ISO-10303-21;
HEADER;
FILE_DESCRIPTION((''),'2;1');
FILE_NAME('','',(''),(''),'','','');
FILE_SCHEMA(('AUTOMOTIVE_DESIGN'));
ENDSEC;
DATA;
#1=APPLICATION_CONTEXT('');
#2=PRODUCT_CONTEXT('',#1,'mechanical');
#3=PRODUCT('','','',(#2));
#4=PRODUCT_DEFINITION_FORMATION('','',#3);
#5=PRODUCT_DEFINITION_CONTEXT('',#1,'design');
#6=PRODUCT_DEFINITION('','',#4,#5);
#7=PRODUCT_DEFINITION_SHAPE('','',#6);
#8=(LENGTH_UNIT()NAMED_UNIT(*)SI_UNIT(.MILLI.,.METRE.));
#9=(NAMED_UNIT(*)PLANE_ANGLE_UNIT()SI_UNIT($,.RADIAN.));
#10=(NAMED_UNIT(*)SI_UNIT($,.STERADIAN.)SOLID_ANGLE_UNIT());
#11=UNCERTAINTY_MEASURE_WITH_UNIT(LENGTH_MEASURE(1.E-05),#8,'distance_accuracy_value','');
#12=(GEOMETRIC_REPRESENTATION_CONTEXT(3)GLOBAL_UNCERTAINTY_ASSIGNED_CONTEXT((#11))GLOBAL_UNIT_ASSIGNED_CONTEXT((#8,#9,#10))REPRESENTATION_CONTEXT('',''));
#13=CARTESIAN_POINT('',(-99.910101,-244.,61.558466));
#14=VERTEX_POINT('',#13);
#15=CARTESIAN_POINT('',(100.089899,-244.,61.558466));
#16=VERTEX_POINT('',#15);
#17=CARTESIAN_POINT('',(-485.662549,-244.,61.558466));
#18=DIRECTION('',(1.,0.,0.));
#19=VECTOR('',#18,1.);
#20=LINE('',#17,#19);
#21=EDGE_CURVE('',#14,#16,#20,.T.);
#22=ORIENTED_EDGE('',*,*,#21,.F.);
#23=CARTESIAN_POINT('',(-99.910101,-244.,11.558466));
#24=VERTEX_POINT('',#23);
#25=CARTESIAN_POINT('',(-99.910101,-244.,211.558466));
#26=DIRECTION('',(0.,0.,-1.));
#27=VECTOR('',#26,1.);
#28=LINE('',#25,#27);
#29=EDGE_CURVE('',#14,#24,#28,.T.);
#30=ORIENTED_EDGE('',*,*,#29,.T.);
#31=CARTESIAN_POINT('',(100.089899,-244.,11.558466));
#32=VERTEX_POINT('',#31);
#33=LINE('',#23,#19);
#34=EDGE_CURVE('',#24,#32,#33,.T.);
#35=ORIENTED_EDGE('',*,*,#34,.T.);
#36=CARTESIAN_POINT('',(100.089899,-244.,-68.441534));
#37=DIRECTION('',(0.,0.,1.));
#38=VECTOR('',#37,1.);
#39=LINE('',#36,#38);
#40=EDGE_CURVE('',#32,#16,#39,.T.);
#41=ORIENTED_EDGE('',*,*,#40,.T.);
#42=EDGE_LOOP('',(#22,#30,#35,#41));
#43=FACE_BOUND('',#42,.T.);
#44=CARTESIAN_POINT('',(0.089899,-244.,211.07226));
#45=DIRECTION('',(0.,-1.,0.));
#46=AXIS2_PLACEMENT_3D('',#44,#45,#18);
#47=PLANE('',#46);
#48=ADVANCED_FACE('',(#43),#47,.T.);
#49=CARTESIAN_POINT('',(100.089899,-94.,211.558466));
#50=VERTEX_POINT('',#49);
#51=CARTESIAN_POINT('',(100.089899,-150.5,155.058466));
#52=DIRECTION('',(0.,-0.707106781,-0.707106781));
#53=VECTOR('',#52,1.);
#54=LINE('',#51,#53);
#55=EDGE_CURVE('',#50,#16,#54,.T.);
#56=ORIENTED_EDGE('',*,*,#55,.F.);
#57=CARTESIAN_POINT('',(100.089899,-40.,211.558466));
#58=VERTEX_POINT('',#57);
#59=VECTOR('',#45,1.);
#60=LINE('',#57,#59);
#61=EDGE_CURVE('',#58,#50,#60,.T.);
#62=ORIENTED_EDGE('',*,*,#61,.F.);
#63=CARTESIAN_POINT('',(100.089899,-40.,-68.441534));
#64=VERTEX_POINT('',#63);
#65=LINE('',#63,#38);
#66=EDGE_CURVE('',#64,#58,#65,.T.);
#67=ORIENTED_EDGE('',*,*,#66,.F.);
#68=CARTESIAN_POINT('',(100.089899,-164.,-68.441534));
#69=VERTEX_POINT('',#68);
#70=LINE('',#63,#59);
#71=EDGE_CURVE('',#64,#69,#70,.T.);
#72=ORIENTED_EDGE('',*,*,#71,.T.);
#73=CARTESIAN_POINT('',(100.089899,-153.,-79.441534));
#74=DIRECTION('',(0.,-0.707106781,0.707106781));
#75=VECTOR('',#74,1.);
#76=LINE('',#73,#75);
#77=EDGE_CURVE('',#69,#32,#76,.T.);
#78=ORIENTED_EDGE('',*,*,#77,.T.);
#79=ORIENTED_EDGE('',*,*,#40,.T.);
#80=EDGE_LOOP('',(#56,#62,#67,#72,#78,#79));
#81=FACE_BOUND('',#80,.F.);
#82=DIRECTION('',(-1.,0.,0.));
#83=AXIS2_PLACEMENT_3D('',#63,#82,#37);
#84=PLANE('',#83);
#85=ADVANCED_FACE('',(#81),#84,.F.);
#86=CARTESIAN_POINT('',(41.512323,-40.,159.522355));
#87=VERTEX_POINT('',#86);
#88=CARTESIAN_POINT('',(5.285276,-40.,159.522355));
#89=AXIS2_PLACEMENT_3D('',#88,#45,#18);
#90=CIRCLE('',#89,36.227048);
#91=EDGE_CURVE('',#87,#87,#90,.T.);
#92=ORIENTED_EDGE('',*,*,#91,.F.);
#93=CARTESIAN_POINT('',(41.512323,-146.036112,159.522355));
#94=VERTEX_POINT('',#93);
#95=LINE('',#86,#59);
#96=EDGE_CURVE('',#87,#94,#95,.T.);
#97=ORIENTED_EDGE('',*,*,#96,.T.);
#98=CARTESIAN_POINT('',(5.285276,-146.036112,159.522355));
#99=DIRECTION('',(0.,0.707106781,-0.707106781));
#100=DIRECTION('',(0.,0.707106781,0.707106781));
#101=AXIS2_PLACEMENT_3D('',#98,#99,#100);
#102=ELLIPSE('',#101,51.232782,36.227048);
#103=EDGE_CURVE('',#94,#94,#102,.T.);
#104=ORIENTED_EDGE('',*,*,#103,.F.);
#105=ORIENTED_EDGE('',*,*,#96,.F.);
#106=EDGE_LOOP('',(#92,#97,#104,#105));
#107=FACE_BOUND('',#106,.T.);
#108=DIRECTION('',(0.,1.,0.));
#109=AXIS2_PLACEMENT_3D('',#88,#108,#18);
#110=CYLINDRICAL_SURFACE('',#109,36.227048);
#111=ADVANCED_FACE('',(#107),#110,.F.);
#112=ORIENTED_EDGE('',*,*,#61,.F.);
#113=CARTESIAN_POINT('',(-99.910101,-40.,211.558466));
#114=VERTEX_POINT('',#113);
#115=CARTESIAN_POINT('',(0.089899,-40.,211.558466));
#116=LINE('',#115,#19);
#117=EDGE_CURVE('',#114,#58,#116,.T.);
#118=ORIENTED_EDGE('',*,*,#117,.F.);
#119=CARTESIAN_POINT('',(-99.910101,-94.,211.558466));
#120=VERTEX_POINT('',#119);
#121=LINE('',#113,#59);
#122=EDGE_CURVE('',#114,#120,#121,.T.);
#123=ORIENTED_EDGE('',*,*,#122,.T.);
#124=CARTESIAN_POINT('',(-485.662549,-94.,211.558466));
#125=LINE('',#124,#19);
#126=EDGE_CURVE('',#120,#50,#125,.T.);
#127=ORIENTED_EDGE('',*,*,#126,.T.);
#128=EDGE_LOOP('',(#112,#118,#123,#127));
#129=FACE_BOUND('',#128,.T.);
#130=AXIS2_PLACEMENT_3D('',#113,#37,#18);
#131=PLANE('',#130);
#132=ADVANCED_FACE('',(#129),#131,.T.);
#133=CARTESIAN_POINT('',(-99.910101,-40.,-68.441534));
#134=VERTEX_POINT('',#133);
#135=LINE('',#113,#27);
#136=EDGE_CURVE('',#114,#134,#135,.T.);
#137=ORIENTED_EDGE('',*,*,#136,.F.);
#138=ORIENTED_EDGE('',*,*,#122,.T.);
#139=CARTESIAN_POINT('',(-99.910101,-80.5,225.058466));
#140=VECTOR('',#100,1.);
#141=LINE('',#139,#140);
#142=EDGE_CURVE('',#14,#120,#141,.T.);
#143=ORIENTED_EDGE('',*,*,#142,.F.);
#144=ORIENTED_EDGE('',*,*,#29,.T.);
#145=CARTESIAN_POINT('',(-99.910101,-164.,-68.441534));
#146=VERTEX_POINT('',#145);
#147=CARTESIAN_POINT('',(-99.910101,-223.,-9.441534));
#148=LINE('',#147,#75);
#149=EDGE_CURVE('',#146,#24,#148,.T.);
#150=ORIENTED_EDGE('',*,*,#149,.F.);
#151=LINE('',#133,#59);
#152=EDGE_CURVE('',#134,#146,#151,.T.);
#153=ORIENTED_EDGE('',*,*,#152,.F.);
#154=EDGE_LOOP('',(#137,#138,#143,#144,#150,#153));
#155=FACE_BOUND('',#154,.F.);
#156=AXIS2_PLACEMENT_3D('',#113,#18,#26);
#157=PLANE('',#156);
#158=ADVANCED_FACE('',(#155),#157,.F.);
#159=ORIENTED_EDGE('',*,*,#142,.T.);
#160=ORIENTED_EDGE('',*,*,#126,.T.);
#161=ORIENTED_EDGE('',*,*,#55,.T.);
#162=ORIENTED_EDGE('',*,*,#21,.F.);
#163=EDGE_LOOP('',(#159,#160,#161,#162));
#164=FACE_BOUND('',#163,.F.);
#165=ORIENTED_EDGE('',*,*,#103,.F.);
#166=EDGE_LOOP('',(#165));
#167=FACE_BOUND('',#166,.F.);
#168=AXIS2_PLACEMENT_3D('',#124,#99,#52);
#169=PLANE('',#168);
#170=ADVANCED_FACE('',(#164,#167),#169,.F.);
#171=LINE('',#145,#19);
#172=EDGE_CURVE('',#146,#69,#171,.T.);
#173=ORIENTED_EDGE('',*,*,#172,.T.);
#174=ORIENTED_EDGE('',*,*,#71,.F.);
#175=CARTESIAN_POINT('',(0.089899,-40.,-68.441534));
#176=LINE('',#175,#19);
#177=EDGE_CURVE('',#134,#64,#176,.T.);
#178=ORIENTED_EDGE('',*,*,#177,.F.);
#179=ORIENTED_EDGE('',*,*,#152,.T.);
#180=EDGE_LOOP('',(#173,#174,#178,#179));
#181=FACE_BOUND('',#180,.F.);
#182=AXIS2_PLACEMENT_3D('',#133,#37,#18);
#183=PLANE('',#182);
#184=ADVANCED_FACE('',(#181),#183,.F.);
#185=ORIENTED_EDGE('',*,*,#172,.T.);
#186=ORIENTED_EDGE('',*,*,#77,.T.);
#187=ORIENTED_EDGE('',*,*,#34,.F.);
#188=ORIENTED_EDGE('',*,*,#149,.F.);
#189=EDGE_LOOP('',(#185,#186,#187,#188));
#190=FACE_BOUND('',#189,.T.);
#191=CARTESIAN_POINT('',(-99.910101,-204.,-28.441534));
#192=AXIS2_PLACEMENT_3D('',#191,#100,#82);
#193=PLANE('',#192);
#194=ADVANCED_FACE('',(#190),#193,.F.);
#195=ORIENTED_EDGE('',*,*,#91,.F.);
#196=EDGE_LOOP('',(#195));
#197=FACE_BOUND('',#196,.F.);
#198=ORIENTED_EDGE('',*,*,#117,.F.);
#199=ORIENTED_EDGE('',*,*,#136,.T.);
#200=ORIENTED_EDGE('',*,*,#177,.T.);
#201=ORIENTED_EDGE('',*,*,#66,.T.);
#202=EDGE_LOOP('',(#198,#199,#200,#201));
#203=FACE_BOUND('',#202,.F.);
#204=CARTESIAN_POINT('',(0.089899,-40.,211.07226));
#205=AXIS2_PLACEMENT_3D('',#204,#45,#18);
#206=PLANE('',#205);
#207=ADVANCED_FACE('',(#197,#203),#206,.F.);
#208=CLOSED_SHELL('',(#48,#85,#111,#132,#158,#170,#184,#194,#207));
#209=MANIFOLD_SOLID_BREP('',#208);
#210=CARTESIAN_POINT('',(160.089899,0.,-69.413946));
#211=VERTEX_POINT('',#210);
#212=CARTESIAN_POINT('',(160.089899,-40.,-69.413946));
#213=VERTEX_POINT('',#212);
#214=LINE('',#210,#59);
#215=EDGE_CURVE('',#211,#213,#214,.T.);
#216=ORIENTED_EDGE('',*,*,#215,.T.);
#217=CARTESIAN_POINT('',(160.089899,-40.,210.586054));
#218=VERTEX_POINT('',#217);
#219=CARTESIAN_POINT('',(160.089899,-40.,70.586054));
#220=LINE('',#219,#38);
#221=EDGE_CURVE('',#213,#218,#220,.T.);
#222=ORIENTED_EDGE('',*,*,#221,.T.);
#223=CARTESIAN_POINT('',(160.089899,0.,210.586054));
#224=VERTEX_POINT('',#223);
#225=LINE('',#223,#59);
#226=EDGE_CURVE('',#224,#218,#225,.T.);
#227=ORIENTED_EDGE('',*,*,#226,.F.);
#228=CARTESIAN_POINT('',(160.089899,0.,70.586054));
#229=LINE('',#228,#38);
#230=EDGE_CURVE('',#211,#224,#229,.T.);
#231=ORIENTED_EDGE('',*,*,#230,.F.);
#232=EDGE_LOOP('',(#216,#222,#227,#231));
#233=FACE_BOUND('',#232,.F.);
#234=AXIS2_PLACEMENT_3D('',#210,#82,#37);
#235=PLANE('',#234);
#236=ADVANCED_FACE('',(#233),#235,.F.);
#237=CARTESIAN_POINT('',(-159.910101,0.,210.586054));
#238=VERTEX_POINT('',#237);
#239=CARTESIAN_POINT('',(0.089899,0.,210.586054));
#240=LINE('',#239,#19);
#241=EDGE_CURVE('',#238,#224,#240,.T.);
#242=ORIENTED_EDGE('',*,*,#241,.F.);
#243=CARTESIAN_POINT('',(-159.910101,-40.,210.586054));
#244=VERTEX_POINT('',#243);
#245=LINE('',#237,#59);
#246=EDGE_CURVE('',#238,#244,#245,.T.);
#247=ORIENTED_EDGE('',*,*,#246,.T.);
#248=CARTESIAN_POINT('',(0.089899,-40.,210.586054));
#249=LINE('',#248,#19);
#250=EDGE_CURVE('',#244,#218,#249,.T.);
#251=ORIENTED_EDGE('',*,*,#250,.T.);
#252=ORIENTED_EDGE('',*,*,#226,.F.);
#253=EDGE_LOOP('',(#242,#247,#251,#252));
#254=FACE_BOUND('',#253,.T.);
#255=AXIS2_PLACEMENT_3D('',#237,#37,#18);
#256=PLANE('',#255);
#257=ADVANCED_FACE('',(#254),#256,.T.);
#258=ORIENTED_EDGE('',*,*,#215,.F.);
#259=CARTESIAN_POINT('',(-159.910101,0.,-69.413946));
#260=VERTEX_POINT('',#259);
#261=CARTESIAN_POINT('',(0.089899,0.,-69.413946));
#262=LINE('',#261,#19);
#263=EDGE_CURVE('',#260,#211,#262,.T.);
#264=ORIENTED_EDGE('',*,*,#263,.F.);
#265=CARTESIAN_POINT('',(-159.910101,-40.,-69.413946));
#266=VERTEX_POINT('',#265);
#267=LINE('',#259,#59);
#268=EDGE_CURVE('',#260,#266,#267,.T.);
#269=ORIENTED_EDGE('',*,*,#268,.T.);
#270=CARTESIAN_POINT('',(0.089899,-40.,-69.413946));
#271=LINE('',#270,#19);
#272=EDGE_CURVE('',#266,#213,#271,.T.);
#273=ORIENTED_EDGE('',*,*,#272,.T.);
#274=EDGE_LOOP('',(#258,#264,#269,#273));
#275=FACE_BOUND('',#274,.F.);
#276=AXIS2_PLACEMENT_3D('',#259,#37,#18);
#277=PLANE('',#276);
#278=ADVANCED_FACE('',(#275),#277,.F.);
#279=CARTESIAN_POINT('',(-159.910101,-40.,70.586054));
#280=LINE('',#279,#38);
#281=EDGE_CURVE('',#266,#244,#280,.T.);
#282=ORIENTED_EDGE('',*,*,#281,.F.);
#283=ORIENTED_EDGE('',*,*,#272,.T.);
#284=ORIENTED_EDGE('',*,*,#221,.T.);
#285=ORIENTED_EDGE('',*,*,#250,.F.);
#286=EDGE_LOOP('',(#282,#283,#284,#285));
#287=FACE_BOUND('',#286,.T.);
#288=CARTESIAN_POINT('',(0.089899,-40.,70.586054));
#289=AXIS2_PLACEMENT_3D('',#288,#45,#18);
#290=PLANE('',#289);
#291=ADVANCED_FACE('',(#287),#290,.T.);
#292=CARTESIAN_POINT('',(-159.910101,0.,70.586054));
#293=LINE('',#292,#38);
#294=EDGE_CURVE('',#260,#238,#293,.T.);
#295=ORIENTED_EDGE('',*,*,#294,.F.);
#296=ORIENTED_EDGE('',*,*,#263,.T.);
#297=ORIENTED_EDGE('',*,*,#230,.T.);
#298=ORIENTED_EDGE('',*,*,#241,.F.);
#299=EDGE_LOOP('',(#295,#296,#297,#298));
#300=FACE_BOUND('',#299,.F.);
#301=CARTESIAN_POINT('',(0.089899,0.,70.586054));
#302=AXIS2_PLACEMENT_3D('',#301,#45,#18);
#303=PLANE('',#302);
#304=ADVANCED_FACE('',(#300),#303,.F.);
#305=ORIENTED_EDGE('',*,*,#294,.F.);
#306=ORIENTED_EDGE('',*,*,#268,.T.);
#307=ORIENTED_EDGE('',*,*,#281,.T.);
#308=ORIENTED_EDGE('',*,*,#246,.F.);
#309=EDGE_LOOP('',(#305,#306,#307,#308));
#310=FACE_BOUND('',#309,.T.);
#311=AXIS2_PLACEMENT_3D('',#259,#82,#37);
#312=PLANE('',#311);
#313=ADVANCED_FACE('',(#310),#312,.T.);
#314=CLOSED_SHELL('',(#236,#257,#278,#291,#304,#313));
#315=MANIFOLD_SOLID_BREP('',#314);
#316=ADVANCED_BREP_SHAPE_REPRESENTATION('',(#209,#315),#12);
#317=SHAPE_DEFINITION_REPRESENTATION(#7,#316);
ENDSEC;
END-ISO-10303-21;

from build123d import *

# Parameters (mm, degrees)
F0_W        = 320
F0_H        = 280
F1_DEPTH    = 40
F2_W        = 200
F2_H        = 0.9724124948
F2_H_2      = 279.0275875052
F2_R        = 36.2270476268
F3_DEPTH    = 204
F4_T1_DEPTH = 971.5048963898
F5_SIZE     = 80


# Not quite as in the source:
# - a fillet or chamfer that OpenCascade refuses, or shapes differently, is made with other operations: its cross-section is extruded or revolved along the edge and cut away or added
# - a feature of the source that left no trace in its solid (it failed there, or was rolled back) is left out


with BuildPart() as f1:
    # F0 (on Front) → F1 (new body)
    with BuildSketch(Plane.XZ):
        with Locations((0.0898987055, 70.5860536863)):
            Rectangle(F0_W, F0_H)
    extrude(amount=F1_DEPTH)


with BuildPart() as f3:
    # F2 (on face) → F3 (new body)
    with BuildSketch(Plane.XZ.offset(40)):
        with Locations((0.0898987055, 211.0722599337)):
            Rectangle(F2_W, F2_H)
        with Locations((0.0898987055, 71.0722599337)):
            Rectangle(F2_W, F2_H_2)
        with Locations((5.2852756344, 159.5223546028)):
            Circle(F2_R, mode=Mode.SUBTRACT)
    extrude(amount=F3_DEPTH)

    # F4: chamfer of 150 on 1 edges, made by hand

    # F4_s2 → F4_t1 (cut)
    with BuildSketch(Plane.YZ.offset(-485.6625494894)):
        Polygon((-94, 211.5584661812), (-244, 61.5584661812), (-244, 211.5584661812), align=None)
    extrude(amount=F4_T1_DEPTH, mode=Mode.SUBTRACT)

    # F5
    f5_edges = [f3.edges().sort_by_distance(p)[0] for p in [
        (0.089899, -244, -68.441534),
    ]]
    chamfer(f5_edges, length=F5_SIZE)


solid = Compound([f1.part, f3.part])
